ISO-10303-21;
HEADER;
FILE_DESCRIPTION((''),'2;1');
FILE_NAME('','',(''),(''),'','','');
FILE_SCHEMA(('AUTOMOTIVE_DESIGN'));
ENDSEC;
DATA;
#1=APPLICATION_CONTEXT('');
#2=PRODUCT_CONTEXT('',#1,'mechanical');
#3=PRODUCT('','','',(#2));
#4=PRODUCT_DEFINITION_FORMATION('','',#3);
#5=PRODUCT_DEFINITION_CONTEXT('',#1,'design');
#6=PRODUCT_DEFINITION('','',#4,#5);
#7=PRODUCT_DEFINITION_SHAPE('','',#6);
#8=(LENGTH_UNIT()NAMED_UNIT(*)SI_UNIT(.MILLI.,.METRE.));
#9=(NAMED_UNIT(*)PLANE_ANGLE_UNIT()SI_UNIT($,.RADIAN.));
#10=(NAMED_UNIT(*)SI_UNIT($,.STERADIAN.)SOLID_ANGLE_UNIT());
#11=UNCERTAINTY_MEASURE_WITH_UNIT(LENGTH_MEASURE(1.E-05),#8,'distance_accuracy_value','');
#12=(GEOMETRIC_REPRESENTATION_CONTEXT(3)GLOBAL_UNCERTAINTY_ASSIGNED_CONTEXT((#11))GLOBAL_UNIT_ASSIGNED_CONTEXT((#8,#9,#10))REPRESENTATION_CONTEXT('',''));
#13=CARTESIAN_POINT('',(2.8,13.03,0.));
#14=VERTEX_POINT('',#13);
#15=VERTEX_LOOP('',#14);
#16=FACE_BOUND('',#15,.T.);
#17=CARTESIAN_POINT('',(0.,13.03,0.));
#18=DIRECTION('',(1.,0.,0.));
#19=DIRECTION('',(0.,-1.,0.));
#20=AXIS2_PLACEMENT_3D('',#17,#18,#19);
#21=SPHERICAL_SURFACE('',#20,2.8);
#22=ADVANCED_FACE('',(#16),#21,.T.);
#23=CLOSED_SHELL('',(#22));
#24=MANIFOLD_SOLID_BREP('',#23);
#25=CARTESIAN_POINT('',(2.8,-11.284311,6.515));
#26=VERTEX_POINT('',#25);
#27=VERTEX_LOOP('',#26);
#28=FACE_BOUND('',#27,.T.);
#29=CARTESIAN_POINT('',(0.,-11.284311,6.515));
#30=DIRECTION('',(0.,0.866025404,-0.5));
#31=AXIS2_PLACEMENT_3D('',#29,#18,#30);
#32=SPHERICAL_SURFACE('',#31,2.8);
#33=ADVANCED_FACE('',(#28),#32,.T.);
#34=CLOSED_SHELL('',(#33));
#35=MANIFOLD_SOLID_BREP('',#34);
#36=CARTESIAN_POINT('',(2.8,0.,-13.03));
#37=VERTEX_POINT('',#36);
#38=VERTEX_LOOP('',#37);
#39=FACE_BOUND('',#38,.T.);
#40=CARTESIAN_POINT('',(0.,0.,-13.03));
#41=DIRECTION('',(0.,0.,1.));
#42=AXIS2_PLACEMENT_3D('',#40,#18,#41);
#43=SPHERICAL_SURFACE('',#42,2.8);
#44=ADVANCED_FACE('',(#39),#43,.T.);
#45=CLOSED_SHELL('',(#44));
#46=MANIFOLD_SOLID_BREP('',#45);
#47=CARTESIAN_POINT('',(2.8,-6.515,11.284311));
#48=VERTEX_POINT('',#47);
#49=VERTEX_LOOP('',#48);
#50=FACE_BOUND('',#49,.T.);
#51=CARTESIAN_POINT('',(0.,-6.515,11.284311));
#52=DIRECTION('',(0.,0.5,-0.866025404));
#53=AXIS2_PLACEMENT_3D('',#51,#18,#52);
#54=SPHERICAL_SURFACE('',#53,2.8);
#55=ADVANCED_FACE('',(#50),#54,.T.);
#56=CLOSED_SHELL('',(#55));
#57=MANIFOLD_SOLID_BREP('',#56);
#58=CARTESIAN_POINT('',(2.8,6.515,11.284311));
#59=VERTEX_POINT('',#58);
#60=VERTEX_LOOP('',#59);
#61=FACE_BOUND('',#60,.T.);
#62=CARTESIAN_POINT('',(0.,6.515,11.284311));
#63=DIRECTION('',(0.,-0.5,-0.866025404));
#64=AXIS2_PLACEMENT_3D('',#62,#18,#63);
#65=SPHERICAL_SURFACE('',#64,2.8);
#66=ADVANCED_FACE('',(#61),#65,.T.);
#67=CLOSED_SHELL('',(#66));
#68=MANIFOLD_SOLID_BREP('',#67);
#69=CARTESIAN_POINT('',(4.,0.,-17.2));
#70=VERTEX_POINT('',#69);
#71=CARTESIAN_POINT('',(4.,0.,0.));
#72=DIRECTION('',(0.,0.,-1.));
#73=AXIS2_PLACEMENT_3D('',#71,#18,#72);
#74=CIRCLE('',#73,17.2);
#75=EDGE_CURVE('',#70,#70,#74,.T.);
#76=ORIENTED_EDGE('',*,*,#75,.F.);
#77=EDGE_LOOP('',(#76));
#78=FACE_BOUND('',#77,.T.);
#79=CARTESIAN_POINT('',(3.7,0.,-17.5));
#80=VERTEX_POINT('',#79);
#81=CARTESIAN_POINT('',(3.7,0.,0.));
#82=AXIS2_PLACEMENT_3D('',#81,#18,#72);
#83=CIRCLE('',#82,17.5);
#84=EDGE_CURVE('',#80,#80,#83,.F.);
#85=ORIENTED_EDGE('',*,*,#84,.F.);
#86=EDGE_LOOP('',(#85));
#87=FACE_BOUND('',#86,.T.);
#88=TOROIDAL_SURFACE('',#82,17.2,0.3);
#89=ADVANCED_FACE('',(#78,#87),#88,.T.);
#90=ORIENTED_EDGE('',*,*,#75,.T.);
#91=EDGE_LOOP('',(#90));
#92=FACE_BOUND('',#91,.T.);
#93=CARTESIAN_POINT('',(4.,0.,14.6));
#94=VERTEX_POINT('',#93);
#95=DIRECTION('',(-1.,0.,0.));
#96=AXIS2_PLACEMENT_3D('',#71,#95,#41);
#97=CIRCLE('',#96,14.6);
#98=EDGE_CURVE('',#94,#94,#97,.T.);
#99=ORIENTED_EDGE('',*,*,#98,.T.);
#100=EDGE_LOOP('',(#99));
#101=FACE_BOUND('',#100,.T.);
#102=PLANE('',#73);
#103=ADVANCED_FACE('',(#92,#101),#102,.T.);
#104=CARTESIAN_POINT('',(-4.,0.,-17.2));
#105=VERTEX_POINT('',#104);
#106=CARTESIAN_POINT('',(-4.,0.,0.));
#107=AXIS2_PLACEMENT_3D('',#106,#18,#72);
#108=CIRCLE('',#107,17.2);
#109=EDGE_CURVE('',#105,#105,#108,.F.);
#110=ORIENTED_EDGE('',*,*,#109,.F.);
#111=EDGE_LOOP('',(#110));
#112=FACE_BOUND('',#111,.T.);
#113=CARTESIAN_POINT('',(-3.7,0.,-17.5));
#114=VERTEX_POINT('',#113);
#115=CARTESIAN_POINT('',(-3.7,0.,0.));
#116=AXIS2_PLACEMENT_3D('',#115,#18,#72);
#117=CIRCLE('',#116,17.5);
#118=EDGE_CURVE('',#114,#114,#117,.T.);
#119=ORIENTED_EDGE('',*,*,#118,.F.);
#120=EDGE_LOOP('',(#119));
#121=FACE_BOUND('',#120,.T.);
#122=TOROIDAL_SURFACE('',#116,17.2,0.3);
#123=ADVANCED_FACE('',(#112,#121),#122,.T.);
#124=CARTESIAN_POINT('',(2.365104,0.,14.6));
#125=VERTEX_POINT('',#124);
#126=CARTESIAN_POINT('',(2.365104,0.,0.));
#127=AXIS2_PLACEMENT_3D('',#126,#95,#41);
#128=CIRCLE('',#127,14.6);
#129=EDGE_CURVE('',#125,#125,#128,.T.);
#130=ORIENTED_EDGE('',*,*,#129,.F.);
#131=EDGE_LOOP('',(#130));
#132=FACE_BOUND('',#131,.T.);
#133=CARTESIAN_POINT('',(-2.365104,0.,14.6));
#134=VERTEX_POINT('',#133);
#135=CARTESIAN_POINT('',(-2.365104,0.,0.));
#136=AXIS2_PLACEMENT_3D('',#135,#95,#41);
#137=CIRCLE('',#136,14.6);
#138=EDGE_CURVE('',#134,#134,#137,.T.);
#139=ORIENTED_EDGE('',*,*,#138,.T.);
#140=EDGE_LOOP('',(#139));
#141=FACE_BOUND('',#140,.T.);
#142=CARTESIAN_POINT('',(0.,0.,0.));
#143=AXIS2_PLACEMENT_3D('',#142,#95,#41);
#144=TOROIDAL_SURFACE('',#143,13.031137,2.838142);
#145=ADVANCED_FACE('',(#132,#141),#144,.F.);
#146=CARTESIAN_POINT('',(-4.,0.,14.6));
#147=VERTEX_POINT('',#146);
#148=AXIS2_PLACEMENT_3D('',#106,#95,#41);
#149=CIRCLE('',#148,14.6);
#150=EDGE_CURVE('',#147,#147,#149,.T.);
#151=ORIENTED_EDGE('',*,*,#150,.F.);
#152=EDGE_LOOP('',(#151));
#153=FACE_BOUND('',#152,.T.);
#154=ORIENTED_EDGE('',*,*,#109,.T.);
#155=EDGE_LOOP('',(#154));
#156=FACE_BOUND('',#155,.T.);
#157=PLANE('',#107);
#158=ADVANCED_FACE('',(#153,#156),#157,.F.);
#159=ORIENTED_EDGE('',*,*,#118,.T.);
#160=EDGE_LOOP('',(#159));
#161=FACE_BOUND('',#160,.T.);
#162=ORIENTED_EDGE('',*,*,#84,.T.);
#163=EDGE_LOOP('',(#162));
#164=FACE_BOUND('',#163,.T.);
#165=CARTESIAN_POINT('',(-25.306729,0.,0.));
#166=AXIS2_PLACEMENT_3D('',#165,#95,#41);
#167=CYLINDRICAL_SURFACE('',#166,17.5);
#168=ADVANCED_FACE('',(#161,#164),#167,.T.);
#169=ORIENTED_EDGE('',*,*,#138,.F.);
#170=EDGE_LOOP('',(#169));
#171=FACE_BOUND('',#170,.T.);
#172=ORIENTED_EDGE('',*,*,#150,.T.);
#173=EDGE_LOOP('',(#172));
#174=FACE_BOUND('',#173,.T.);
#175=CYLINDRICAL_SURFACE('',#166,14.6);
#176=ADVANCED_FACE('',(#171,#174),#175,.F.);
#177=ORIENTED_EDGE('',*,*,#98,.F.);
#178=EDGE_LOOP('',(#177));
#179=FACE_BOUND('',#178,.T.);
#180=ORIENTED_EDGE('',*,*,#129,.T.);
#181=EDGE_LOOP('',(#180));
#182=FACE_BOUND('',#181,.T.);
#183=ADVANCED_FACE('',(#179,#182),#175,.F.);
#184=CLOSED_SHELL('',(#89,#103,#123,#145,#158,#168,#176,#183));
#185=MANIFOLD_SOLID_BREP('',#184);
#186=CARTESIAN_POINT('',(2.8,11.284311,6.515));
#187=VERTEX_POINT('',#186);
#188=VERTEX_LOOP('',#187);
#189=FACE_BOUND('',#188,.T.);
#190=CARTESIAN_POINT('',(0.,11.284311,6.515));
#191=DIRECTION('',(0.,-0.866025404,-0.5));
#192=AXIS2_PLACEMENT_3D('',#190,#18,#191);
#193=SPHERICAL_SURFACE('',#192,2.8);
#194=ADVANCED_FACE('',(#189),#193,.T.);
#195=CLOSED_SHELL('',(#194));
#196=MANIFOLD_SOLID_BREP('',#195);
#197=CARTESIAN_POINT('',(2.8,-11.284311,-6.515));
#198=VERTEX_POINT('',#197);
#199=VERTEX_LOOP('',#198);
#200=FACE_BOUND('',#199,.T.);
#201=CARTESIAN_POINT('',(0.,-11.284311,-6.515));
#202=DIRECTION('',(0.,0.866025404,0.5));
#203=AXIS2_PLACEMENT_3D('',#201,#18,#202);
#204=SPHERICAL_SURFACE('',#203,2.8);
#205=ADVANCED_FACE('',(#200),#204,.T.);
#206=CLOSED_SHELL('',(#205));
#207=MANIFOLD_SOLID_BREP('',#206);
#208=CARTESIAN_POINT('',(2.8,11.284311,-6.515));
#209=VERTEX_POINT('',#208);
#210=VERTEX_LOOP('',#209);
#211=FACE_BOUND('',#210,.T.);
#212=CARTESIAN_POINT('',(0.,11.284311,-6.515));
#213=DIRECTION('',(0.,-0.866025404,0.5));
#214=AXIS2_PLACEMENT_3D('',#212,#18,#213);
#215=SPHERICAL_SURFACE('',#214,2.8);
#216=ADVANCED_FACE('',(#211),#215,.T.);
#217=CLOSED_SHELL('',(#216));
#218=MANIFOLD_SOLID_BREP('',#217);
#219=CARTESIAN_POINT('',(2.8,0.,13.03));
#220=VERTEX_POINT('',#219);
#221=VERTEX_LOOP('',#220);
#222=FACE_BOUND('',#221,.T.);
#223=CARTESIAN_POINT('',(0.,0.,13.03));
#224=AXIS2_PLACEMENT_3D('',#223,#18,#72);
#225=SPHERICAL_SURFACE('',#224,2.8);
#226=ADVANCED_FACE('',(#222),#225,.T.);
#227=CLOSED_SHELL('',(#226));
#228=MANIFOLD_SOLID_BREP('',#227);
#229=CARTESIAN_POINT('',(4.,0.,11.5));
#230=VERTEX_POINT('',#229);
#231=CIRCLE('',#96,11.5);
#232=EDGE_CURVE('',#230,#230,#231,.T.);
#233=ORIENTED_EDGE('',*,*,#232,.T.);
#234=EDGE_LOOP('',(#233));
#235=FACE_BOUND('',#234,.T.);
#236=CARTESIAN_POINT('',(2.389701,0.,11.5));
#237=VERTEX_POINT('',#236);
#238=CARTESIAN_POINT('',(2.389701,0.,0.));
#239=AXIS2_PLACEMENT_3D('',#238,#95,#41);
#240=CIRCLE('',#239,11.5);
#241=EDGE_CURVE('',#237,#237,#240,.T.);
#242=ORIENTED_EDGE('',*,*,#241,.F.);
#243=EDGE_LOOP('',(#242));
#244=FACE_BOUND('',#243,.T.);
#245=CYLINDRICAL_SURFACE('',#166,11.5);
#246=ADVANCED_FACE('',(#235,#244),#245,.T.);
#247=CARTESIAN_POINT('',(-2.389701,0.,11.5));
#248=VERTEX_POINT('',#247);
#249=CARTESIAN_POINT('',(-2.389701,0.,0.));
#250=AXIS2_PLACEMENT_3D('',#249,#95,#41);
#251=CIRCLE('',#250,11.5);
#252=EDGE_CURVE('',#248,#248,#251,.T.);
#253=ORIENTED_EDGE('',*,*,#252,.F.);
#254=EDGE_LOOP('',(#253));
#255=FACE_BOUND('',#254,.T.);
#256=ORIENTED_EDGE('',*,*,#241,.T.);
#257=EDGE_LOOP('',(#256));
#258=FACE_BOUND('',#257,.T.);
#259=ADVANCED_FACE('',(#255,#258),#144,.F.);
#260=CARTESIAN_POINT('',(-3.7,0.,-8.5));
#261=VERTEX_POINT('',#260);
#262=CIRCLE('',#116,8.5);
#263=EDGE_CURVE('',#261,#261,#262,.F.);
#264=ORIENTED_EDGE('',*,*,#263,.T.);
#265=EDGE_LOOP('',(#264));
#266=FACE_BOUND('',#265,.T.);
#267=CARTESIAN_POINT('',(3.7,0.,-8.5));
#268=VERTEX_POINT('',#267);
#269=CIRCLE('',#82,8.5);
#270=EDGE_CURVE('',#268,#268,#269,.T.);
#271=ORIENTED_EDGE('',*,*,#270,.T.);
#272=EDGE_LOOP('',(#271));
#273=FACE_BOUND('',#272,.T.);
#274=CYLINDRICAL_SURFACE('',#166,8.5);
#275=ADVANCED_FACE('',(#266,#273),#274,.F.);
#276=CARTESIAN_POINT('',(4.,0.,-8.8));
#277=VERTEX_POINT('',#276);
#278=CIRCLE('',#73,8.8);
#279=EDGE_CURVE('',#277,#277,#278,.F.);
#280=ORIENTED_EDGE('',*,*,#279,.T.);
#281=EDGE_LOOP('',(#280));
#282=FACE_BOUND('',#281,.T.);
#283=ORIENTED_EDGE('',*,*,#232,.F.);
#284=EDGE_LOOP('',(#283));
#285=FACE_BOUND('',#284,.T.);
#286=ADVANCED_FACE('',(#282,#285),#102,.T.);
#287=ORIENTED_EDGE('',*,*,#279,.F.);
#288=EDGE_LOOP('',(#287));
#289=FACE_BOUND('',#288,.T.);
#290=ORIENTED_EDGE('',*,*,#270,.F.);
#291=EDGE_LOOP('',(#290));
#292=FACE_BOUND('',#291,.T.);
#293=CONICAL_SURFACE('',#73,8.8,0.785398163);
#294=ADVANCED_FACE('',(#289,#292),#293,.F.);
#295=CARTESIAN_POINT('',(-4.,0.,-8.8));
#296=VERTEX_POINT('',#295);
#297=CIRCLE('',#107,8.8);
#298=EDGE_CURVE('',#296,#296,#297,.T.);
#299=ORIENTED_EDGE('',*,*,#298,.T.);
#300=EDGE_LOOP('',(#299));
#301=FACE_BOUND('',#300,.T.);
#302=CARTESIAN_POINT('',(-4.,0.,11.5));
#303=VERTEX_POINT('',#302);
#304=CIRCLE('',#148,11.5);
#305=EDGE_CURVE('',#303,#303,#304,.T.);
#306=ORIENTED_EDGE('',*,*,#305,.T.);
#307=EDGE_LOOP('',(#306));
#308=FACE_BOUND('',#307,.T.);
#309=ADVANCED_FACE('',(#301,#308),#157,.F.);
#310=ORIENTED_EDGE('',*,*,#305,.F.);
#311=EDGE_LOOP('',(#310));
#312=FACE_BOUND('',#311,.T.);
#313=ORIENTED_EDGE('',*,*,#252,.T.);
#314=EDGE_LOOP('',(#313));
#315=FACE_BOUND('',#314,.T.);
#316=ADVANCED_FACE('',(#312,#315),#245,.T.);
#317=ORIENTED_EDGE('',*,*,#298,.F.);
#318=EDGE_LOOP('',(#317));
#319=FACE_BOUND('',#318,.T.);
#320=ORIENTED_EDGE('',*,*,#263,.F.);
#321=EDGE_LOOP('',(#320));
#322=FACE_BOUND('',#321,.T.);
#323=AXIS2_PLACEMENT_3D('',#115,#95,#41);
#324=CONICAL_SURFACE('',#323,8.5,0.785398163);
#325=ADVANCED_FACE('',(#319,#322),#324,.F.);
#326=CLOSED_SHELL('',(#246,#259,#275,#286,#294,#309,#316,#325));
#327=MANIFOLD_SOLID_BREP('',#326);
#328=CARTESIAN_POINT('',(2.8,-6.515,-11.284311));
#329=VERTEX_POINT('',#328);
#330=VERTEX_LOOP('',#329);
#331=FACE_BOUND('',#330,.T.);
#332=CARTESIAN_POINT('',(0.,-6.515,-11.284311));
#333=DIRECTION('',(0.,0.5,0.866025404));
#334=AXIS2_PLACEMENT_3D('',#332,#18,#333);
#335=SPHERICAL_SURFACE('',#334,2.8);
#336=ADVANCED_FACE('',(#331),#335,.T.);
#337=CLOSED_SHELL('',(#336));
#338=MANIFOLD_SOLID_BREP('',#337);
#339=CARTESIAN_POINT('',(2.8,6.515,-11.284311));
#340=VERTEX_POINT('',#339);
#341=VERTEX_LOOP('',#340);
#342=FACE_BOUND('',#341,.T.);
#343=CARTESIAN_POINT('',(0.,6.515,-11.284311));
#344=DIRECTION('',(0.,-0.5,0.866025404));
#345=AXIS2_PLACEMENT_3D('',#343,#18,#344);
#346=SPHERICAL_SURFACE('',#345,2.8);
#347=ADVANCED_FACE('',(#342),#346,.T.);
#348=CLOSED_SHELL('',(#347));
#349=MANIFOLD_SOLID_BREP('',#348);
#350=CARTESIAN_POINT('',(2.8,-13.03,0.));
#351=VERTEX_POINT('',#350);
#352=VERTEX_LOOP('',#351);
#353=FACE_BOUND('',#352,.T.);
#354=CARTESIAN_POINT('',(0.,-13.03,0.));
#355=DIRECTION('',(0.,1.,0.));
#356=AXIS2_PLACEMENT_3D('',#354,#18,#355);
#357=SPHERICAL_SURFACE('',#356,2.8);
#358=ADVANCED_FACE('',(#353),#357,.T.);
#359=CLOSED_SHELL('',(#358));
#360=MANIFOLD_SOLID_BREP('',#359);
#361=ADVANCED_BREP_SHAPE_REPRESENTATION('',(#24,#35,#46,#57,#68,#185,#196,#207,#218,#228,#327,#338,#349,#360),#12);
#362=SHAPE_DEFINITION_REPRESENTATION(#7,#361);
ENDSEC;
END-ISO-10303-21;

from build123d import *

# Parameters (mm, degrees)
CIRPATTERN3_COUNT = 12
FILLET1_R         = 0.3
CHAMFER1_SIZE     = 0.3


with BuildPart() as part:
    # Sketch1 → Revolve1 (revolve)
    with BuildSketch(Plane(origin=(0, 0, 0), x_dir=(1, 0, 0), z_dir=(0, 1, 0))):
        with BuildLine():
            Line((4, 14.6), (4, 17.5))
            Line((4, 17.5), (-4, 17.5))
            Line((-4, 17.5), (-4, 14.6))
            Line((-4, 14.6), (-2.365104403, 14.6))
            ThreePointArc((-2.365104403, 14.6), (0, 15.869278981), (2.365104403, 14.6))
            Line((2.365104403, 14.6), (4, 14.6))
        make_face()
        with BuildLine():
            ThreePointArc((2.389700722, 11.5), (0, 10.192994985), (-2.389700722, 11.5))
            Line((-2.389700722, 11.5), (-4, 11.5))
            Line((-4, 11.5), (-4, 8.5))
            Line((-4, 8.5), (4, 8.5))
            Line((4, 8.5), (4, 11.5))
            Line((4, 11.5), (2.389700722, 11.5))
        make_face()
    revolve(axis=Axis((-25.30672907, 0, 0), (1, 0, 0)))

    # Fillet1
    fillet1_edges = [part.edges().sort_by_distance(p)[0] for p in [
        (4, 0, 17.5),
        (-4, 0, 17.5),
    ]]
    fillet(fillet1_edges, radius=FILLET1_R)

    # Chamfer1
    chamfer1_edges = [part.edges().sort_by_distance(p)[0] for p in [
        (4, 0, 8.5),
        (-4, 0, 8.5),
    ]]
    chamfer(chamfer1_edges, length=CHAMFER1_SIZE)


with BuildPart() as body_2:
    # Sketch2 → Revolve2 (revolve)
    with BuildSketch(Plane.XY):
        with BuildLine():
            Line((-2.8, 13.03), (2.8, 13.03))
            ThreePointArc((2.8, 13.03), (0, 15.83), (-2.8, 13.03))
        make_face()
    revolve(axis=Axis((2.8, 13.03, 0), (-1, 0, 0)))


with BuildPart() as cirpattern3_1:
    # CirPattern3: pattern copy
    add(body_2.part.rotate(Axis((4, 0, 0), (-1, 0, 0)), 1 * 360 / CIRPATTERN3_COUNT))


with BuildPart() as cirpattern3_2:
    # CirPattern3: pattern copy
    add(body_2.part.rotate(Axis((4, 0, 0), (-1, 0, 0)), 2 * 360 / CIRPATTERN3_COUNT))


with BuildPart() as cirpattern3_3:
    # CirPattern3: pattern copy
    add(body_2.part.rotate(Axis((4, 0, 0), (-1, 0, 0)), 3 * 360 / CIRPATTERN3_COUNT))


with BuildPart() as cirpattern3_4:
    # CirPattern3: pattern copy
    add(body_2.part.rotate(Axis((4, 0, 0), (-1, 0, 0)), 4 * 360 / CIRPATTERN3_COUNT))


with BuildPart() as cirpattern3_5:
    # CirPattern3: pattern copy
    add(body_2.part.rotate(Axis((4, 0, 0), (-1, 0, 0)), 5 * 360 / CIRPATTERN3_COUNT))


with BuildPart() as cirpattern3_6:
    # CirPattern3: pattern copy
    add(body_2.part.rotate(Axis((4, 0, 0), (-1, 0, 0)), 6 * 360 / CIRPATTERN3_COUNT))


with BuildPart() as cirpattern3_7:
    # CirPattern3: pattern copy
    add(body_2.part.rotate(Axis((4, 0, 0), (-1, 0, 0)), 7 * 360 / CIRPATTERN3_COUNT))


with BuildPart() as cirpattern3_8:
    # CirPattern3: pattern copy
    add(body_2.part.rotate(Axis((4, 0, 0), (-1, 0, 0)), 8 * 360 / CIRPATTERN3_COUNT))


with BuildPart() as cirpattern3_9:
    # CirPattern3: pattern copy
    add(body_2.part.rotate(Axis((4, 0, 0), (-1, 0, 0)), 9 * 360 / CIRPATTERN3_COUNT))


with BuildPart() as cirpattern3_10:
    # CirPattern3: pattern copy
    add(body_2.part.rotate(Axis((4, 0, 0), (-1, 0, 0)), 10 * 360 / CIRPATTERN3_COUNT))


with BuildPart() as cirpattern3_11:
    # CirPattern3: pattern copy
    add(body_2.part.rotate(Axis((4, 0, 0), (-1, 0, 0)), 11 * 360 / CIRPATTERN3_COUNT))


solid = Compound([part.part, body_2.part, cirpattern3_1.part, cirpattern3_2.part, cirpattern3_3.part, cirpattern3_4.part, cirpattern3_5.part, cirpattern3_6.part, cirpattern3_7.part, cirpattern3_8.part, cirpattern3_9.part, cirpattern3_10.part, cirpattern3_11.part])
